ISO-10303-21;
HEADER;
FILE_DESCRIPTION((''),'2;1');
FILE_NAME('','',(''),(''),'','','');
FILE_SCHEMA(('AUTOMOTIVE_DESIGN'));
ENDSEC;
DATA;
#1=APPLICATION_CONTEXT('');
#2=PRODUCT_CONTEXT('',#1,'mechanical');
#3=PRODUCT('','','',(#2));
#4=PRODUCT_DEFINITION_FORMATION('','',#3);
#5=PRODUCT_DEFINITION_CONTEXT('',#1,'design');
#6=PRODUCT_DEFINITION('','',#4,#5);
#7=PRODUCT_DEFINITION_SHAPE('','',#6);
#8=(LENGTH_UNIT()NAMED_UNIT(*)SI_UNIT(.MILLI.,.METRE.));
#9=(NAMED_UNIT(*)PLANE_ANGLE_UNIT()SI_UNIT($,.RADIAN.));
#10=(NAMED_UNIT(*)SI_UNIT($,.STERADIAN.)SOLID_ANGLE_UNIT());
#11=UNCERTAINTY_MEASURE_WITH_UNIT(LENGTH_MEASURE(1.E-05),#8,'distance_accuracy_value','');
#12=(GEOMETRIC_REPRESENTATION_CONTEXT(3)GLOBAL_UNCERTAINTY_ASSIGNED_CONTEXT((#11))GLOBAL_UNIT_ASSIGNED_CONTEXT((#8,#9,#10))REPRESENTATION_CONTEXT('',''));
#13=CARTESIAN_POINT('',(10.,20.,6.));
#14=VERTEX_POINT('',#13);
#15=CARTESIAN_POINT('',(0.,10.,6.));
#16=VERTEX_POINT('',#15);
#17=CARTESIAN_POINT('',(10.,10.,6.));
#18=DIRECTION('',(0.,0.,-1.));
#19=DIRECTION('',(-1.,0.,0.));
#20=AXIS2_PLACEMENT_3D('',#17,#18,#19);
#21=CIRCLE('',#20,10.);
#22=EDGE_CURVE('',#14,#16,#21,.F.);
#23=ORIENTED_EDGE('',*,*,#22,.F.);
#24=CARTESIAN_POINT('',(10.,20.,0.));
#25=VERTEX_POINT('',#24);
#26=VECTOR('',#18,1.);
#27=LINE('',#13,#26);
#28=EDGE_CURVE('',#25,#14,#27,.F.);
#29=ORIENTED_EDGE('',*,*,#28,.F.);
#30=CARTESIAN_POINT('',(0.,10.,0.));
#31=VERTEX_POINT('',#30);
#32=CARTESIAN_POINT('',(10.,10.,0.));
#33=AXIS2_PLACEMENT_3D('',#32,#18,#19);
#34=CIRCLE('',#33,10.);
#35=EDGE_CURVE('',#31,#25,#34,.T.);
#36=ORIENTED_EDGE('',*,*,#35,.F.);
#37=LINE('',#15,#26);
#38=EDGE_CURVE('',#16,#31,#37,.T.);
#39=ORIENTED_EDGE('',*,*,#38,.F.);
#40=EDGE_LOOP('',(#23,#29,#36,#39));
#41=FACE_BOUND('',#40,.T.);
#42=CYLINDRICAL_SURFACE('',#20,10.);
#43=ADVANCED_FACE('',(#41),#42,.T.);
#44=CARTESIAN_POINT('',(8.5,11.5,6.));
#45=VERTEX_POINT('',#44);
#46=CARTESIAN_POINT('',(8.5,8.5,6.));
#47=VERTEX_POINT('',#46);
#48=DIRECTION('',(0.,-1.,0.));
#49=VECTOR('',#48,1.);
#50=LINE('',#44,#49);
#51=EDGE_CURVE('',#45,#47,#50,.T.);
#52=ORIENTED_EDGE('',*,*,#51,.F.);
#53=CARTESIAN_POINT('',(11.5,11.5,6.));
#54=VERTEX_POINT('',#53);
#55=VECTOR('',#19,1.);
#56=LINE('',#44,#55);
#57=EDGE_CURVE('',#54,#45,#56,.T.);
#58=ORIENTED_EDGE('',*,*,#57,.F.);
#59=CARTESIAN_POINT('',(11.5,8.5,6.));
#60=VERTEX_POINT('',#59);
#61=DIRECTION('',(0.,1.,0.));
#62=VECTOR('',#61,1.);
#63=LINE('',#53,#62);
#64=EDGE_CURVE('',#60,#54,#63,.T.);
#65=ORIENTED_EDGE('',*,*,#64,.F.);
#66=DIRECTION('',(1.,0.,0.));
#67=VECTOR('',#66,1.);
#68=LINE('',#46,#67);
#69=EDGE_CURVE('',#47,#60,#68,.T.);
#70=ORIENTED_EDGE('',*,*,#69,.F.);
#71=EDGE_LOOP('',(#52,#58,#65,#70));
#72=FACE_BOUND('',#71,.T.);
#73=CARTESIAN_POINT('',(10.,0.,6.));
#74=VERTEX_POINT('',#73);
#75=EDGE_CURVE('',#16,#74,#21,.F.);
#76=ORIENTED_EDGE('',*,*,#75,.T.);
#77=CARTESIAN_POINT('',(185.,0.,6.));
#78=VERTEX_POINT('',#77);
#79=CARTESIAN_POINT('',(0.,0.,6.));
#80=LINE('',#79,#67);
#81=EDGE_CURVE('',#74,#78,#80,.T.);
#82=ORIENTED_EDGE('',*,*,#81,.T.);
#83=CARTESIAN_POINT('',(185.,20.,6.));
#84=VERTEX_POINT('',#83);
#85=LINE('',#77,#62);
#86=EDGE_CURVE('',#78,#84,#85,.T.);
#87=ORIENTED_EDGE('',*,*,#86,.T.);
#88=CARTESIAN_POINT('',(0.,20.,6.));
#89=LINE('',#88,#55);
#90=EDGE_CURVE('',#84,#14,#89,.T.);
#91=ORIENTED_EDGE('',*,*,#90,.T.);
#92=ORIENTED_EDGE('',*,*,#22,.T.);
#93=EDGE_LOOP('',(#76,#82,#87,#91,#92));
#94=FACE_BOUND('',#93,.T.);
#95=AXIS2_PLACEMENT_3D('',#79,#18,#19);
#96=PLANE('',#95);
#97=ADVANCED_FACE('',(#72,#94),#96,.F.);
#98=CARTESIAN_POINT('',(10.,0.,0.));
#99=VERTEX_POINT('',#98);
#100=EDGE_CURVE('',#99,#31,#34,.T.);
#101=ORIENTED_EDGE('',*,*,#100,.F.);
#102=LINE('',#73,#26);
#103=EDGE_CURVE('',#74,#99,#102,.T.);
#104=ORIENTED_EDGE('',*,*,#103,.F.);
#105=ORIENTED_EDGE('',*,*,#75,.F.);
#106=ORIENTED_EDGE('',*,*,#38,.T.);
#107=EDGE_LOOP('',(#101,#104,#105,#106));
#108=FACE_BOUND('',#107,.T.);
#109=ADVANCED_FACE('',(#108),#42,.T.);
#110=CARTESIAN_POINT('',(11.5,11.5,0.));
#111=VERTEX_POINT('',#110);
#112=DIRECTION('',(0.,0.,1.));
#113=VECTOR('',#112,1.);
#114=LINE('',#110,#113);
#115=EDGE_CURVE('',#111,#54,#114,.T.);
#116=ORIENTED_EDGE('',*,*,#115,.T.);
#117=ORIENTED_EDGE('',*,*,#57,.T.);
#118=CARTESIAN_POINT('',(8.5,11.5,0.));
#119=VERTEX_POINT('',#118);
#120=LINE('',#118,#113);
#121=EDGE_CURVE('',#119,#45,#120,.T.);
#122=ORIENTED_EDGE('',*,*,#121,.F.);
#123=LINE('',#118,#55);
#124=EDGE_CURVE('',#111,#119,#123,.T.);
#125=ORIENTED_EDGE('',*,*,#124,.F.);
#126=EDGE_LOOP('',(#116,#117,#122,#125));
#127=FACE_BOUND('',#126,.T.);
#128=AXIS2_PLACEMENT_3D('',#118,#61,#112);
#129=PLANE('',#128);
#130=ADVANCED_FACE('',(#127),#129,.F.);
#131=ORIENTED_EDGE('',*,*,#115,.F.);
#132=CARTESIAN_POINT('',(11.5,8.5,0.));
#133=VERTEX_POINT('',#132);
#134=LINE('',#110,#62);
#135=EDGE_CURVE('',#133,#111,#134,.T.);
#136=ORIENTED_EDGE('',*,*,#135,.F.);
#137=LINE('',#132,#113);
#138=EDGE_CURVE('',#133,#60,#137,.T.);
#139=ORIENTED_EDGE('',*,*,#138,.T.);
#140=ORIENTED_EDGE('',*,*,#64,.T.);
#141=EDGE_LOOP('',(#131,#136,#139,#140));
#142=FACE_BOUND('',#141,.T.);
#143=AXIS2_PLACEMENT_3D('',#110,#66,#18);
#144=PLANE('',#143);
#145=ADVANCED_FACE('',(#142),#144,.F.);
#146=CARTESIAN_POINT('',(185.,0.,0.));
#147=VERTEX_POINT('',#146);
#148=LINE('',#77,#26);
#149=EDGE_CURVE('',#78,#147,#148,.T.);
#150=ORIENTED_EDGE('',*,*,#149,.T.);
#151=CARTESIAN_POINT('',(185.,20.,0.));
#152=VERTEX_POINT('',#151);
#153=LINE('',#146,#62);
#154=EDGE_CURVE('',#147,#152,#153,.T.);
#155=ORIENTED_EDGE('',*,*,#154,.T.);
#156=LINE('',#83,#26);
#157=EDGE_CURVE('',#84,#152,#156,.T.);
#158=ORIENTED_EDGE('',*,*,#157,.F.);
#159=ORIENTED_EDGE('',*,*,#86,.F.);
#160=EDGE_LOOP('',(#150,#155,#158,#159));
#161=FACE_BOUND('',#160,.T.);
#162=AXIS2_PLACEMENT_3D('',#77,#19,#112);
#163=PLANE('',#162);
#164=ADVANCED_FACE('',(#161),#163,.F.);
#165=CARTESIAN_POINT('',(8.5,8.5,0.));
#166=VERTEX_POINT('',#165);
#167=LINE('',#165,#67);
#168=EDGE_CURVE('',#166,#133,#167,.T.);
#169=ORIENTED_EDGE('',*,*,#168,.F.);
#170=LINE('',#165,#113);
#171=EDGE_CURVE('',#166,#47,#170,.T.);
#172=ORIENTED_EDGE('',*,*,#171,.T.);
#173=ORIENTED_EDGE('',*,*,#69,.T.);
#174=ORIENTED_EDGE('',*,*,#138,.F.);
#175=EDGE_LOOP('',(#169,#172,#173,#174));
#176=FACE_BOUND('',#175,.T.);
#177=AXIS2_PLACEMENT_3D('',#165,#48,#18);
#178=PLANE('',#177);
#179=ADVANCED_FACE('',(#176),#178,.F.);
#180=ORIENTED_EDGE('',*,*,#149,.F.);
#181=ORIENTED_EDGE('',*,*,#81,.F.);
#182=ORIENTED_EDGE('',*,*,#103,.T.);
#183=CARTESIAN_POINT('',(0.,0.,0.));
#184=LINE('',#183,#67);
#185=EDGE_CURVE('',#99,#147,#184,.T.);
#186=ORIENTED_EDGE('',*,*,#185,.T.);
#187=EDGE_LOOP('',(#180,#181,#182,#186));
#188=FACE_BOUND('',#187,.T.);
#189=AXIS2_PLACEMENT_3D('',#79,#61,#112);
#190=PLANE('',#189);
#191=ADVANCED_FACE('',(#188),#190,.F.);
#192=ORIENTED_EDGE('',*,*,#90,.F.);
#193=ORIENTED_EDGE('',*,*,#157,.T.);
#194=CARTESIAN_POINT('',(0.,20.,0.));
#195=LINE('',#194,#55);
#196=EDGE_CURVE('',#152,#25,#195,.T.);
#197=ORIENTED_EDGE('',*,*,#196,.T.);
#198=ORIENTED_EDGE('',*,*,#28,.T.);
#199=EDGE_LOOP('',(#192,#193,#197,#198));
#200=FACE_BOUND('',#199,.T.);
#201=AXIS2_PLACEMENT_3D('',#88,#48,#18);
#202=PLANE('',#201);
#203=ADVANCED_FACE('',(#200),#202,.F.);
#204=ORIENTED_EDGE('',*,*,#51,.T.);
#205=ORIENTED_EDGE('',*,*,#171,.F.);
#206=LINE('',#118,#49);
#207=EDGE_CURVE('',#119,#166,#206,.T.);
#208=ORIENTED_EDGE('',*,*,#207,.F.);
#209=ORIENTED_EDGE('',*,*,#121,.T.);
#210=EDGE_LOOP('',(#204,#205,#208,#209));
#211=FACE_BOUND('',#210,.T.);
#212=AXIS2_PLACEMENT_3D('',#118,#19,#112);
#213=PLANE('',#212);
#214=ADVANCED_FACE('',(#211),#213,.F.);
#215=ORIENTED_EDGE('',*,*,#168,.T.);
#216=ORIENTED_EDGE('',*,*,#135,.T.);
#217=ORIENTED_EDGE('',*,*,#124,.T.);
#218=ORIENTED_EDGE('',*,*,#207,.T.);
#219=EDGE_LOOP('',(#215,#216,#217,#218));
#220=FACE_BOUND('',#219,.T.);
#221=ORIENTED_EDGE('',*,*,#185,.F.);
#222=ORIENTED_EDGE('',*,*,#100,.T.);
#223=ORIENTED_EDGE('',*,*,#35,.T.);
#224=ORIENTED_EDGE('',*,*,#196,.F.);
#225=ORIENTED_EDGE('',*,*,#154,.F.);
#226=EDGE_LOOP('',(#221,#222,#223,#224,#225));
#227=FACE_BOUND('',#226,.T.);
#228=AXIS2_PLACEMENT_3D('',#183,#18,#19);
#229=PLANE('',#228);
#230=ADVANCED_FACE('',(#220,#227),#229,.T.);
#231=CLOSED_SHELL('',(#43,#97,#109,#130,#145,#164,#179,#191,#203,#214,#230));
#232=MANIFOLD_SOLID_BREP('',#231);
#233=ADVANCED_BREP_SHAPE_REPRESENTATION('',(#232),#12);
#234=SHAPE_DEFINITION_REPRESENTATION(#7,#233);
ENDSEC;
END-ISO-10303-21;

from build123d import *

# Parameters (mm, degrees)
SKETCH1_W           = 185
SKETCH1_H           = 20
BOSS_EXTRUDE1_DEPTH = 6
SKETCH2_W           = 3
SKETCH2_H           = 3
CUT_EXTRUDE2_DEPTH  = 187.174649187
FILLET1_R           = 10


with BuildPart() as part:
    # Sketch1 → Boss-Extrude1 (new body)
    with BuildSketch(Plane.XY):
        with Locations((92.5, 10)):
            Rectangle(SKETCH1_W, SKETCH1_H)
    extrude(amount=BOSS_EXTRUDE1_DEPTH)

    # Sketch2 → Cut-Extrude2 (cut, through all)
    with BuildSketch(Plane.XY.offset(6)):
        with Locations((10, 10)):
            Rectangle(SKETCH2_W, SKETCH2_H)
    extrude(amount=-CUT_EXTRUDE2_DEPTH, mode=Mode.SUBTRACT)

    # Fillet1
    fillet1_edges = [part.edges().sort_by_distance(p)[0] for p in [
        (0, 0, 3),
        (0, 20, 3),
    ]]
    fillet(fillet1_edges, radius=FILLET1_R - 0.0001)  # a hair under: the kernel refuses the full size


solid = part.part
